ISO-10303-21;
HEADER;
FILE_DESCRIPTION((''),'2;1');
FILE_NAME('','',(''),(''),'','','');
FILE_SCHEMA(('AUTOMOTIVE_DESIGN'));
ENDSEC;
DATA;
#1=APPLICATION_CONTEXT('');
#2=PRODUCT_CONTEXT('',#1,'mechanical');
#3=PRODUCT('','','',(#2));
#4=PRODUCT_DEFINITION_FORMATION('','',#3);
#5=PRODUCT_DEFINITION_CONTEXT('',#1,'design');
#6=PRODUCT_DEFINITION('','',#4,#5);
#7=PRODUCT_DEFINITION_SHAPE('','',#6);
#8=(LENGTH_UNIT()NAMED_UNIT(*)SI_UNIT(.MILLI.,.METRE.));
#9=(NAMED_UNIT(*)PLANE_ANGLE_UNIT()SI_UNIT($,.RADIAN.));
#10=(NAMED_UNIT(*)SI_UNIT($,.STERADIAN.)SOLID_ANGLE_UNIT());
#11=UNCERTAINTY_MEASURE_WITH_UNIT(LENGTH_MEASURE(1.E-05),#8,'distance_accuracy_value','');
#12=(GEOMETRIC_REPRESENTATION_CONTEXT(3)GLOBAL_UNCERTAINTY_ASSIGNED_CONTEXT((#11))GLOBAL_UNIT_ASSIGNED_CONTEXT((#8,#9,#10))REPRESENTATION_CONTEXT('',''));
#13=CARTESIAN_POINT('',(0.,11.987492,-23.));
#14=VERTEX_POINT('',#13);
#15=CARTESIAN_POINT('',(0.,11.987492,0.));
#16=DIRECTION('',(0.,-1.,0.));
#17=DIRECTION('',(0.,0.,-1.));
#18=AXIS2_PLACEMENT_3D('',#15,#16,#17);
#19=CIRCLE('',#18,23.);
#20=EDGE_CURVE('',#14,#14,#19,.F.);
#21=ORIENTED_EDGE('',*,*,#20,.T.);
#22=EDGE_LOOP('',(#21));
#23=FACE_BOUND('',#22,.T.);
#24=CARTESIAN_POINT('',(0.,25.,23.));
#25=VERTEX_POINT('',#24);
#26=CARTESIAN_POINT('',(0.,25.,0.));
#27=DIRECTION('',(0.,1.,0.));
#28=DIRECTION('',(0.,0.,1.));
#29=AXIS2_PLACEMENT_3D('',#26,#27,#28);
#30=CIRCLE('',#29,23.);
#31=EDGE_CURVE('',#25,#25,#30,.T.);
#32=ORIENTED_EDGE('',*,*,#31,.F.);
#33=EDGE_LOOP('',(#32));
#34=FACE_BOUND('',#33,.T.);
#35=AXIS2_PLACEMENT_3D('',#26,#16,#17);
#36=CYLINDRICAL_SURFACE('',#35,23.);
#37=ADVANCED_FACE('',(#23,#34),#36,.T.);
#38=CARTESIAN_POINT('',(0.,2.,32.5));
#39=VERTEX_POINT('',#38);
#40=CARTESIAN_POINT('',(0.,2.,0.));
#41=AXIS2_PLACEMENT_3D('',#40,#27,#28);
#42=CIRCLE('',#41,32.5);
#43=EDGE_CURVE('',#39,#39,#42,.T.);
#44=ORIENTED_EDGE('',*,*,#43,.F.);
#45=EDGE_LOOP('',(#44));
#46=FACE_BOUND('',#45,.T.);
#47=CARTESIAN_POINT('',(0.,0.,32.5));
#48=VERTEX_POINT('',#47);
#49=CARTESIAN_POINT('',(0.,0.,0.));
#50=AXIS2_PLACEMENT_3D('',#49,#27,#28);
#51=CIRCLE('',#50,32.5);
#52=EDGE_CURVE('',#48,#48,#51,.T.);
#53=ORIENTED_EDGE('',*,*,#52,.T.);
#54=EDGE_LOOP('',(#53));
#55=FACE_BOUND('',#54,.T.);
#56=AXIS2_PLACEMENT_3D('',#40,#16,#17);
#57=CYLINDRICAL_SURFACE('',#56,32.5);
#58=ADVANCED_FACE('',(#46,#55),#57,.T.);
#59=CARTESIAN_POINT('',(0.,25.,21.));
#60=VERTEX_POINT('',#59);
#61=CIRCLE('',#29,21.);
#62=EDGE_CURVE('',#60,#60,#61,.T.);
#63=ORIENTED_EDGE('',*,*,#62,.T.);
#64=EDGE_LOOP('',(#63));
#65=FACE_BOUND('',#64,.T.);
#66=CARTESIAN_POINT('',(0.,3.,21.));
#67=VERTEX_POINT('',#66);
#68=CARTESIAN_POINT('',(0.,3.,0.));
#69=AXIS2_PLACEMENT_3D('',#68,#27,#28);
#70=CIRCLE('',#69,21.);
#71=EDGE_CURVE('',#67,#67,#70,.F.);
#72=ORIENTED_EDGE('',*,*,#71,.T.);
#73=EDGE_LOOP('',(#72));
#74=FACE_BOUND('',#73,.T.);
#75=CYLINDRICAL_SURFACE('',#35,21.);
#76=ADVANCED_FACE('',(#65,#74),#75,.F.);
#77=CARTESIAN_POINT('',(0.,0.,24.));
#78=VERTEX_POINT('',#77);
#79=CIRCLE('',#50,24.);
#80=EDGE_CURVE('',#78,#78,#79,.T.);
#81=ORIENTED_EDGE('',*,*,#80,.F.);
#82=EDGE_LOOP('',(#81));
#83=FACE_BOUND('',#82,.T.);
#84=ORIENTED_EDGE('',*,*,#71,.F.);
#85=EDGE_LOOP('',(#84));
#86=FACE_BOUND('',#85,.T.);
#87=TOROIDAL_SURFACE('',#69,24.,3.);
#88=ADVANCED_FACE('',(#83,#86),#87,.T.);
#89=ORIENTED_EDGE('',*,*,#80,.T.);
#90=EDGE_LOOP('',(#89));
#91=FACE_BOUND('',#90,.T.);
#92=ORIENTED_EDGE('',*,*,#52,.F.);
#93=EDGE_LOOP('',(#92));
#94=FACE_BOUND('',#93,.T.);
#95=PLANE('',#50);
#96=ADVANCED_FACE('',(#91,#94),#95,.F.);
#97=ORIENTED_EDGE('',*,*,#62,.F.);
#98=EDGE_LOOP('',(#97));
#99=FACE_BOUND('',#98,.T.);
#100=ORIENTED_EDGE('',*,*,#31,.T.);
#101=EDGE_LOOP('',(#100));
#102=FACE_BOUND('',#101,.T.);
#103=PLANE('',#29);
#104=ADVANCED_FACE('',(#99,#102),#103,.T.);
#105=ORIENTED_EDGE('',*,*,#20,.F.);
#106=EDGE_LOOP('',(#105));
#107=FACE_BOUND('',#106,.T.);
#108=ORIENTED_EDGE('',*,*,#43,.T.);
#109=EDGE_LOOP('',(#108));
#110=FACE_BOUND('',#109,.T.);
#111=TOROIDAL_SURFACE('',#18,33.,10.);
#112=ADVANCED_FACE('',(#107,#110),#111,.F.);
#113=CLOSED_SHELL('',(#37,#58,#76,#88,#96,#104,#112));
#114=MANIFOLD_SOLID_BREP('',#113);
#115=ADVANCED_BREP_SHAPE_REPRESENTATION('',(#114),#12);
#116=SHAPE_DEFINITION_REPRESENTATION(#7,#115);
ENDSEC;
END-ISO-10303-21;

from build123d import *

# Parameters (mm, degrees)
SKETCH1_R           = 23
SKETCH1_R_2         = 21
BOSS_EXTRUDE1_DEPTH = 25
SKETCH2_R           = 32.5
SKETCH2_R_2         = 23
BOSS_EXTRUDE2_DEPTH = 2
FILLET1_R           = 10
FILLET2_R           = 3


with BuildPart() as part:
    # Sketch1 → Boss-Extrude1 (new body)
    with BuildSketch(Plane(origin=(0, 0, 0), x_dir=(1, 0, 0), z_dir=(0, 1, 0))):
        with Locations(Location((0, 0, 0), (0, 0, 270))):
            Circle(SKETCH1_R)
        with Locations(Location((0, 0, 0), (0, 0, 270))):
            Circle(SKETCH1_R_2, mode=Mode.SUBTRACT)
    extrude(amount=BOSS_EXTRUDE1_DEPTH)

    # Sketch2 → Boss-Extrude2 (add)
    with BuildSketch(Plane(origin=(0, 0, 0), x_dir=(1, 0, 0), z_dir=(0, 1, 0))):
        with Locations(Location((0, 0, 0), (0, 0, 270))):
            Circle(SKETCH2_R)
        with Locations(Location((0, 0, 0), (0, 0, 270))):
            Circle(SKETCH2_R_2, mode=Mode.SUBTRACT)
    extrude(amount=BOSS_EXTRUDE2_DEPTH)

    # Fillet1
    # the kernel refuses this fillet: 10 mm, written as the material it adds along each edge
    with BuildSketch(Plane(origin=(0, 2, 0), x_dir=(-1.8e-16, 0, 1), z_dir=(-1, 0, -1.8e-16))) as fillet1_piece_1:
        with BuildLine():
            CenterArc((33, 9.98749217771909), FILLET1_R, 180, 87.13401601740111)
            Line((32.5, 1.78e-15), (32.49, -0.19974984355438008))
            ThreePointArc((32.49, -0.19974984355438008), (27.75, -0.19999999999999996), (23, -0.19999999999999996))
            Line((23, -0.19999999999999996), (22.8, 0))
            Line((22.8, 0), (22.8, 9.98749217771909))
            Line((22.8, 9.98749217771909), (23, 9.98749217771909))
        make_face()
    revolve(axis=Axis((0, 2, 0), (0, 1, 0)))

    # Fillet2
    fillet2_edges = [part.edges().sort_by_distance(p)[0] for p in [
        (6.43e-15, 0, -21),
    ]]
    fillet(fillet2_edges, radius=FILLET2_R)


solid = part.part
